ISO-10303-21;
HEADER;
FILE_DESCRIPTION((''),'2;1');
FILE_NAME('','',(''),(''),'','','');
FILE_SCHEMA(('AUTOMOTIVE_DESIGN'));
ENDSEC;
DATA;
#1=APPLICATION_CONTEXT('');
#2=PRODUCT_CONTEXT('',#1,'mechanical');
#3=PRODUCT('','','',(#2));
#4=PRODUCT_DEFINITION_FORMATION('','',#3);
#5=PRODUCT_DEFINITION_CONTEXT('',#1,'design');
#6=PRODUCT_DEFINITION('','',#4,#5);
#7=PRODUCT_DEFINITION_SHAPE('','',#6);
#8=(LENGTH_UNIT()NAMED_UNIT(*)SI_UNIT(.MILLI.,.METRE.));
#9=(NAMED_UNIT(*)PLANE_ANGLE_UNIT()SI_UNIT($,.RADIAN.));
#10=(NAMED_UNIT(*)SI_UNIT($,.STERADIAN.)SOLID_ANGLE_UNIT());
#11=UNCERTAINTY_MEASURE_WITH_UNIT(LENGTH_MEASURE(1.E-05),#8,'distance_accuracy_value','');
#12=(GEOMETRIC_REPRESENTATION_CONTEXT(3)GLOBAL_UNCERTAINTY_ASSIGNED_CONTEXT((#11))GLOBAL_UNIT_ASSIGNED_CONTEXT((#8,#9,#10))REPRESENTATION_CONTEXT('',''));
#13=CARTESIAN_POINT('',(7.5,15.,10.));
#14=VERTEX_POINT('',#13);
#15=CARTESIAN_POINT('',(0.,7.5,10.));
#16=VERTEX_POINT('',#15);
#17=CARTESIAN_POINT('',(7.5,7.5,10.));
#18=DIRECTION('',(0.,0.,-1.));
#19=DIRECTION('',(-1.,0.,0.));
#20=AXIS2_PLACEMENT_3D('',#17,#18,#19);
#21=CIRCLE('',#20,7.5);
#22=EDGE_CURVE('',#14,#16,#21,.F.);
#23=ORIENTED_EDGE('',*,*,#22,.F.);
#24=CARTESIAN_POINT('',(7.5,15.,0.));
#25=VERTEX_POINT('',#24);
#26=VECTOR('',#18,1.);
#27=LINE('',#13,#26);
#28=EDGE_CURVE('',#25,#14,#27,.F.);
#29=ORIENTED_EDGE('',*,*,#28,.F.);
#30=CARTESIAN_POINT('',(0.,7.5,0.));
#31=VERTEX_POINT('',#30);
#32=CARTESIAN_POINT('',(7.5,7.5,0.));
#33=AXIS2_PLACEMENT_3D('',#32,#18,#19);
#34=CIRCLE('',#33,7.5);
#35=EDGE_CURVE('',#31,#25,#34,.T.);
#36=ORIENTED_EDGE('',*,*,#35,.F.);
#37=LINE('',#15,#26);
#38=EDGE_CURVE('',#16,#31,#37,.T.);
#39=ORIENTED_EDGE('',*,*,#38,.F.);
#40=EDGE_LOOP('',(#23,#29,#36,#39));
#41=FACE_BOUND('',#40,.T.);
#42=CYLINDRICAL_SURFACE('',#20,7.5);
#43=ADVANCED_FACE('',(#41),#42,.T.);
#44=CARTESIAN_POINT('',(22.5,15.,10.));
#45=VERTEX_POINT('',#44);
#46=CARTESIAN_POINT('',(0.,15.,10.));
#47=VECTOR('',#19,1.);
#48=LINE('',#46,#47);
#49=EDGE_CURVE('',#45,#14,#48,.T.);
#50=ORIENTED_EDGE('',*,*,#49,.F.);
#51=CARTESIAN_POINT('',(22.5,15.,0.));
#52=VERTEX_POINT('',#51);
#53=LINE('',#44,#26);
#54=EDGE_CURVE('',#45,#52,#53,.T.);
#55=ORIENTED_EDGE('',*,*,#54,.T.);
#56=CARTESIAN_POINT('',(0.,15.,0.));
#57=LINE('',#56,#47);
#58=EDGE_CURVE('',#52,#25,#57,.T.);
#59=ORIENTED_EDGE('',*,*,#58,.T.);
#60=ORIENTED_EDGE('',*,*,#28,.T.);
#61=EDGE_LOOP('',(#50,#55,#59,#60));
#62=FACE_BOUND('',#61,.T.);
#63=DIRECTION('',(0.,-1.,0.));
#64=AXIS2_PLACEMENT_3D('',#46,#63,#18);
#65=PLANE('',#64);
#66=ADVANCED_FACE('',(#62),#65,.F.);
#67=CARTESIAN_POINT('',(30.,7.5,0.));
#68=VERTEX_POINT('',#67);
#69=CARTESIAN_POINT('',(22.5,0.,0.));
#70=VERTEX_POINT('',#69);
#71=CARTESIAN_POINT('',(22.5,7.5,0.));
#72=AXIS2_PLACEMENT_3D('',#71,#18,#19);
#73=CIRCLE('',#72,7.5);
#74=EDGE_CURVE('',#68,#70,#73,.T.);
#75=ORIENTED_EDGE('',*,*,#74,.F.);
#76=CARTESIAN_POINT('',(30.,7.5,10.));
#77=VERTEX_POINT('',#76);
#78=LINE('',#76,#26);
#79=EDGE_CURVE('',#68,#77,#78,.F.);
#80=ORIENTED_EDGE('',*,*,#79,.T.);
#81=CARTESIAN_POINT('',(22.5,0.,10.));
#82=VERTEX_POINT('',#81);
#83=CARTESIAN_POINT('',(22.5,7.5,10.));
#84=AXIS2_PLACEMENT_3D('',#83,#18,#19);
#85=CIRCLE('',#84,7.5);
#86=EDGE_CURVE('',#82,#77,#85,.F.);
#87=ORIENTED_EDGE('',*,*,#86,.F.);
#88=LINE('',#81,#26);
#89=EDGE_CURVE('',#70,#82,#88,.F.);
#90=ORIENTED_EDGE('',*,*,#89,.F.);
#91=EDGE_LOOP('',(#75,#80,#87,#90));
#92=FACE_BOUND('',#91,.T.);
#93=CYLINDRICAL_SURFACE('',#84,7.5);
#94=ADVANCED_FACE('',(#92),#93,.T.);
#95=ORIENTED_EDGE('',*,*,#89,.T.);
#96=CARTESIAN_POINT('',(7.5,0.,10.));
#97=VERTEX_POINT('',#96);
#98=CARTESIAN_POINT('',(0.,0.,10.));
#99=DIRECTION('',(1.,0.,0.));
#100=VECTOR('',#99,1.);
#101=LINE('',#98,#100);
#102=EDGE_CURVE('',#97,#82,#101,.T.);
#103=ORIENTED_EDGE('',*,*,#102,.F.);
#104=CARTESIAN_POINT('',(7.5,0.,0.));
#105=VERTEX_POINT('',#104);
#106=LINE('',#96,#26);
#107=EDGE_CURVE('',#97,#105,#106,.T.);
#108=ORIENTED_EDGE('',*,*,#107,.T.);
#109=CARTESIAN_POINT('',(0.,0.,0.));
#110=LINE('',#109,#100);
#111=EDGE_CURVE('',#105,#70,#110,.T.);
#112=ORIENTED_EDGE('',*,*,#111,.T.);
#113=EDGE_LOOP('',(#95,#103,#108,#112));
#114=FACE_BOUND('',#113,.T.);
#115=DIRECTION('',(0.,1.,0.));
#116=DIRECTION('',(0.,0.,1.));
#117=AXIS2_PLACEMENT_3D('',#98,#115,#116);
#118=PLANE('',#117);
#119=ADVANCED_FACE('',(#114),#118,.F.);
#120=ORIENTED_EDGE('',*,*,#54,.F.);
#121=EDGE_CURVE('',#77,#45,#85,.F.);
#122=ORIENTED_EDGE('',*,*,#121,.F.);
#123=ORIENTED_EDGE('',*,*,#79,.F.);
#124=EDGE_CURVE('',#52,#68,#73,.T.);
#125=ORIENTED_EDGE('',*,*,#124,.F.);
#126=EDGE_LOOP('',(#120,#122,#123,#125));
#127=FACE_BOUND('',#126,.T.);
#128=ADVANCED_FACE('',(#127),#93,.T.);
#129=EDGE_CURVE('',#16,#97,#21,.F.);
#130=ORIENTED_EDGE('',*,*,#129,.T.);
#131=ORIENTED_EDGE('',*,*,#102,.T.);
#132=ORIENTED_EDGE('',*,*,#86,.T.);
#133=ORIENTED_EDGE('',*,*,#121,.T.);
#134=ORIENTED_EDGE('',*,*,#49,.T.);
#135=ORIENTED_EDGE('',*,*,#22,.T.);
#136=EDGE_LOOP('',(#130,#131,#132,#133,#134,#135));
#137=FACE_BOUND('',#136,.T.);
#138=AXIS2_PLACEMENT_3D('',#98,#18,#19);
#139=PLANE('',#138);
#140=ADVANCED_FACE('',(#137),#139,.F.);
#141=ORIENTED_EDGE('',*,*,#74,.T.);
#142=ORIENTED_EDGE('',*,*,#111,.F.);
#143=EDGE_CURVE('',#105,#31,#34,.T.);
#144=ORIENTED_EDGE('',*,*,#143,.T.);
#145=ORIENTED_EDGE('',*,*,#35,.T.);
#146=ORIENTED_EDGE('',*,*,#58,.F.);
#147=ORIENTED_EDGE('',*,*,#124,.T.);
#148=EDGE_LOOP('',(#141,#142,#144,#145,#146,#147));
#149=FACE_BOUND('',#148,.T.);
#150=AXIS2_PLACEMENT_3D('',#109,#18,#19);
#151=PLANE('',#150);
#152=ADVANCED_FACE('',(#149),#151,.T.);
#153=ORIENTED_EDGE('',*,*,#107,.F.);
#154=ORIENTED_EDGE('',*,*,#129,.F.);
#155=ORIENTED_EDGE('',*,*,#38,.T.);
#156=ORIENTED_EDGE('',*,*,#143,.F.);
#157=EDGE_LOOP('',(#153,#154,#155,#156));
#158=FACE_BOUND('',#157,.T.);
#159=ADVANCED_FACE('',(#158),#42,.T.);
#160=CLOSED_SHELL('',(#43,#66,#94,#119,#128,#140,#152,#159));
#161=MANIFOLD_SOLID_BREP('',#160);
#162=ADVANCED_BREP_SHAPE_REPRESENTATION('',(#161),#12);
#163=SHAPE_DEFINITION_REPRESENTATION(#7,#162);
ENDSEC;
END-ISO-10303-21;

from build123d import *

# Parameters (mm, degrees)
SKETCH1_W           = 30
SKETCH1_H           = 15
BOSS_EXTRUDE1_DEPTH = 10
FILLET1_R           = 7.5


with BuildPart() as part:
    # Sketch1 → Boss-Extrude1 (new body)
    with BuildSketch(Plane.XY):
        with Locations((15, 7.5)):
            Rectangle(SKETCH1_W, SKETCH1_H)
    extrude(amount=BOSS_EXTRUDE1_DEPTH)

    # Fillet1
    fillet1_edges = [part.edges().sort_by_distance(p)[0] for p in [
        (30, 0, 5),
        (30, 15, 5),
        (0, 0, 5),
        (0, 15, 5),
    ]]
    fillet(fillet1_edges, radius=FILLET1_R - 0.0001)  # a hair under: the kernel refuses the full size


solid = part.part
